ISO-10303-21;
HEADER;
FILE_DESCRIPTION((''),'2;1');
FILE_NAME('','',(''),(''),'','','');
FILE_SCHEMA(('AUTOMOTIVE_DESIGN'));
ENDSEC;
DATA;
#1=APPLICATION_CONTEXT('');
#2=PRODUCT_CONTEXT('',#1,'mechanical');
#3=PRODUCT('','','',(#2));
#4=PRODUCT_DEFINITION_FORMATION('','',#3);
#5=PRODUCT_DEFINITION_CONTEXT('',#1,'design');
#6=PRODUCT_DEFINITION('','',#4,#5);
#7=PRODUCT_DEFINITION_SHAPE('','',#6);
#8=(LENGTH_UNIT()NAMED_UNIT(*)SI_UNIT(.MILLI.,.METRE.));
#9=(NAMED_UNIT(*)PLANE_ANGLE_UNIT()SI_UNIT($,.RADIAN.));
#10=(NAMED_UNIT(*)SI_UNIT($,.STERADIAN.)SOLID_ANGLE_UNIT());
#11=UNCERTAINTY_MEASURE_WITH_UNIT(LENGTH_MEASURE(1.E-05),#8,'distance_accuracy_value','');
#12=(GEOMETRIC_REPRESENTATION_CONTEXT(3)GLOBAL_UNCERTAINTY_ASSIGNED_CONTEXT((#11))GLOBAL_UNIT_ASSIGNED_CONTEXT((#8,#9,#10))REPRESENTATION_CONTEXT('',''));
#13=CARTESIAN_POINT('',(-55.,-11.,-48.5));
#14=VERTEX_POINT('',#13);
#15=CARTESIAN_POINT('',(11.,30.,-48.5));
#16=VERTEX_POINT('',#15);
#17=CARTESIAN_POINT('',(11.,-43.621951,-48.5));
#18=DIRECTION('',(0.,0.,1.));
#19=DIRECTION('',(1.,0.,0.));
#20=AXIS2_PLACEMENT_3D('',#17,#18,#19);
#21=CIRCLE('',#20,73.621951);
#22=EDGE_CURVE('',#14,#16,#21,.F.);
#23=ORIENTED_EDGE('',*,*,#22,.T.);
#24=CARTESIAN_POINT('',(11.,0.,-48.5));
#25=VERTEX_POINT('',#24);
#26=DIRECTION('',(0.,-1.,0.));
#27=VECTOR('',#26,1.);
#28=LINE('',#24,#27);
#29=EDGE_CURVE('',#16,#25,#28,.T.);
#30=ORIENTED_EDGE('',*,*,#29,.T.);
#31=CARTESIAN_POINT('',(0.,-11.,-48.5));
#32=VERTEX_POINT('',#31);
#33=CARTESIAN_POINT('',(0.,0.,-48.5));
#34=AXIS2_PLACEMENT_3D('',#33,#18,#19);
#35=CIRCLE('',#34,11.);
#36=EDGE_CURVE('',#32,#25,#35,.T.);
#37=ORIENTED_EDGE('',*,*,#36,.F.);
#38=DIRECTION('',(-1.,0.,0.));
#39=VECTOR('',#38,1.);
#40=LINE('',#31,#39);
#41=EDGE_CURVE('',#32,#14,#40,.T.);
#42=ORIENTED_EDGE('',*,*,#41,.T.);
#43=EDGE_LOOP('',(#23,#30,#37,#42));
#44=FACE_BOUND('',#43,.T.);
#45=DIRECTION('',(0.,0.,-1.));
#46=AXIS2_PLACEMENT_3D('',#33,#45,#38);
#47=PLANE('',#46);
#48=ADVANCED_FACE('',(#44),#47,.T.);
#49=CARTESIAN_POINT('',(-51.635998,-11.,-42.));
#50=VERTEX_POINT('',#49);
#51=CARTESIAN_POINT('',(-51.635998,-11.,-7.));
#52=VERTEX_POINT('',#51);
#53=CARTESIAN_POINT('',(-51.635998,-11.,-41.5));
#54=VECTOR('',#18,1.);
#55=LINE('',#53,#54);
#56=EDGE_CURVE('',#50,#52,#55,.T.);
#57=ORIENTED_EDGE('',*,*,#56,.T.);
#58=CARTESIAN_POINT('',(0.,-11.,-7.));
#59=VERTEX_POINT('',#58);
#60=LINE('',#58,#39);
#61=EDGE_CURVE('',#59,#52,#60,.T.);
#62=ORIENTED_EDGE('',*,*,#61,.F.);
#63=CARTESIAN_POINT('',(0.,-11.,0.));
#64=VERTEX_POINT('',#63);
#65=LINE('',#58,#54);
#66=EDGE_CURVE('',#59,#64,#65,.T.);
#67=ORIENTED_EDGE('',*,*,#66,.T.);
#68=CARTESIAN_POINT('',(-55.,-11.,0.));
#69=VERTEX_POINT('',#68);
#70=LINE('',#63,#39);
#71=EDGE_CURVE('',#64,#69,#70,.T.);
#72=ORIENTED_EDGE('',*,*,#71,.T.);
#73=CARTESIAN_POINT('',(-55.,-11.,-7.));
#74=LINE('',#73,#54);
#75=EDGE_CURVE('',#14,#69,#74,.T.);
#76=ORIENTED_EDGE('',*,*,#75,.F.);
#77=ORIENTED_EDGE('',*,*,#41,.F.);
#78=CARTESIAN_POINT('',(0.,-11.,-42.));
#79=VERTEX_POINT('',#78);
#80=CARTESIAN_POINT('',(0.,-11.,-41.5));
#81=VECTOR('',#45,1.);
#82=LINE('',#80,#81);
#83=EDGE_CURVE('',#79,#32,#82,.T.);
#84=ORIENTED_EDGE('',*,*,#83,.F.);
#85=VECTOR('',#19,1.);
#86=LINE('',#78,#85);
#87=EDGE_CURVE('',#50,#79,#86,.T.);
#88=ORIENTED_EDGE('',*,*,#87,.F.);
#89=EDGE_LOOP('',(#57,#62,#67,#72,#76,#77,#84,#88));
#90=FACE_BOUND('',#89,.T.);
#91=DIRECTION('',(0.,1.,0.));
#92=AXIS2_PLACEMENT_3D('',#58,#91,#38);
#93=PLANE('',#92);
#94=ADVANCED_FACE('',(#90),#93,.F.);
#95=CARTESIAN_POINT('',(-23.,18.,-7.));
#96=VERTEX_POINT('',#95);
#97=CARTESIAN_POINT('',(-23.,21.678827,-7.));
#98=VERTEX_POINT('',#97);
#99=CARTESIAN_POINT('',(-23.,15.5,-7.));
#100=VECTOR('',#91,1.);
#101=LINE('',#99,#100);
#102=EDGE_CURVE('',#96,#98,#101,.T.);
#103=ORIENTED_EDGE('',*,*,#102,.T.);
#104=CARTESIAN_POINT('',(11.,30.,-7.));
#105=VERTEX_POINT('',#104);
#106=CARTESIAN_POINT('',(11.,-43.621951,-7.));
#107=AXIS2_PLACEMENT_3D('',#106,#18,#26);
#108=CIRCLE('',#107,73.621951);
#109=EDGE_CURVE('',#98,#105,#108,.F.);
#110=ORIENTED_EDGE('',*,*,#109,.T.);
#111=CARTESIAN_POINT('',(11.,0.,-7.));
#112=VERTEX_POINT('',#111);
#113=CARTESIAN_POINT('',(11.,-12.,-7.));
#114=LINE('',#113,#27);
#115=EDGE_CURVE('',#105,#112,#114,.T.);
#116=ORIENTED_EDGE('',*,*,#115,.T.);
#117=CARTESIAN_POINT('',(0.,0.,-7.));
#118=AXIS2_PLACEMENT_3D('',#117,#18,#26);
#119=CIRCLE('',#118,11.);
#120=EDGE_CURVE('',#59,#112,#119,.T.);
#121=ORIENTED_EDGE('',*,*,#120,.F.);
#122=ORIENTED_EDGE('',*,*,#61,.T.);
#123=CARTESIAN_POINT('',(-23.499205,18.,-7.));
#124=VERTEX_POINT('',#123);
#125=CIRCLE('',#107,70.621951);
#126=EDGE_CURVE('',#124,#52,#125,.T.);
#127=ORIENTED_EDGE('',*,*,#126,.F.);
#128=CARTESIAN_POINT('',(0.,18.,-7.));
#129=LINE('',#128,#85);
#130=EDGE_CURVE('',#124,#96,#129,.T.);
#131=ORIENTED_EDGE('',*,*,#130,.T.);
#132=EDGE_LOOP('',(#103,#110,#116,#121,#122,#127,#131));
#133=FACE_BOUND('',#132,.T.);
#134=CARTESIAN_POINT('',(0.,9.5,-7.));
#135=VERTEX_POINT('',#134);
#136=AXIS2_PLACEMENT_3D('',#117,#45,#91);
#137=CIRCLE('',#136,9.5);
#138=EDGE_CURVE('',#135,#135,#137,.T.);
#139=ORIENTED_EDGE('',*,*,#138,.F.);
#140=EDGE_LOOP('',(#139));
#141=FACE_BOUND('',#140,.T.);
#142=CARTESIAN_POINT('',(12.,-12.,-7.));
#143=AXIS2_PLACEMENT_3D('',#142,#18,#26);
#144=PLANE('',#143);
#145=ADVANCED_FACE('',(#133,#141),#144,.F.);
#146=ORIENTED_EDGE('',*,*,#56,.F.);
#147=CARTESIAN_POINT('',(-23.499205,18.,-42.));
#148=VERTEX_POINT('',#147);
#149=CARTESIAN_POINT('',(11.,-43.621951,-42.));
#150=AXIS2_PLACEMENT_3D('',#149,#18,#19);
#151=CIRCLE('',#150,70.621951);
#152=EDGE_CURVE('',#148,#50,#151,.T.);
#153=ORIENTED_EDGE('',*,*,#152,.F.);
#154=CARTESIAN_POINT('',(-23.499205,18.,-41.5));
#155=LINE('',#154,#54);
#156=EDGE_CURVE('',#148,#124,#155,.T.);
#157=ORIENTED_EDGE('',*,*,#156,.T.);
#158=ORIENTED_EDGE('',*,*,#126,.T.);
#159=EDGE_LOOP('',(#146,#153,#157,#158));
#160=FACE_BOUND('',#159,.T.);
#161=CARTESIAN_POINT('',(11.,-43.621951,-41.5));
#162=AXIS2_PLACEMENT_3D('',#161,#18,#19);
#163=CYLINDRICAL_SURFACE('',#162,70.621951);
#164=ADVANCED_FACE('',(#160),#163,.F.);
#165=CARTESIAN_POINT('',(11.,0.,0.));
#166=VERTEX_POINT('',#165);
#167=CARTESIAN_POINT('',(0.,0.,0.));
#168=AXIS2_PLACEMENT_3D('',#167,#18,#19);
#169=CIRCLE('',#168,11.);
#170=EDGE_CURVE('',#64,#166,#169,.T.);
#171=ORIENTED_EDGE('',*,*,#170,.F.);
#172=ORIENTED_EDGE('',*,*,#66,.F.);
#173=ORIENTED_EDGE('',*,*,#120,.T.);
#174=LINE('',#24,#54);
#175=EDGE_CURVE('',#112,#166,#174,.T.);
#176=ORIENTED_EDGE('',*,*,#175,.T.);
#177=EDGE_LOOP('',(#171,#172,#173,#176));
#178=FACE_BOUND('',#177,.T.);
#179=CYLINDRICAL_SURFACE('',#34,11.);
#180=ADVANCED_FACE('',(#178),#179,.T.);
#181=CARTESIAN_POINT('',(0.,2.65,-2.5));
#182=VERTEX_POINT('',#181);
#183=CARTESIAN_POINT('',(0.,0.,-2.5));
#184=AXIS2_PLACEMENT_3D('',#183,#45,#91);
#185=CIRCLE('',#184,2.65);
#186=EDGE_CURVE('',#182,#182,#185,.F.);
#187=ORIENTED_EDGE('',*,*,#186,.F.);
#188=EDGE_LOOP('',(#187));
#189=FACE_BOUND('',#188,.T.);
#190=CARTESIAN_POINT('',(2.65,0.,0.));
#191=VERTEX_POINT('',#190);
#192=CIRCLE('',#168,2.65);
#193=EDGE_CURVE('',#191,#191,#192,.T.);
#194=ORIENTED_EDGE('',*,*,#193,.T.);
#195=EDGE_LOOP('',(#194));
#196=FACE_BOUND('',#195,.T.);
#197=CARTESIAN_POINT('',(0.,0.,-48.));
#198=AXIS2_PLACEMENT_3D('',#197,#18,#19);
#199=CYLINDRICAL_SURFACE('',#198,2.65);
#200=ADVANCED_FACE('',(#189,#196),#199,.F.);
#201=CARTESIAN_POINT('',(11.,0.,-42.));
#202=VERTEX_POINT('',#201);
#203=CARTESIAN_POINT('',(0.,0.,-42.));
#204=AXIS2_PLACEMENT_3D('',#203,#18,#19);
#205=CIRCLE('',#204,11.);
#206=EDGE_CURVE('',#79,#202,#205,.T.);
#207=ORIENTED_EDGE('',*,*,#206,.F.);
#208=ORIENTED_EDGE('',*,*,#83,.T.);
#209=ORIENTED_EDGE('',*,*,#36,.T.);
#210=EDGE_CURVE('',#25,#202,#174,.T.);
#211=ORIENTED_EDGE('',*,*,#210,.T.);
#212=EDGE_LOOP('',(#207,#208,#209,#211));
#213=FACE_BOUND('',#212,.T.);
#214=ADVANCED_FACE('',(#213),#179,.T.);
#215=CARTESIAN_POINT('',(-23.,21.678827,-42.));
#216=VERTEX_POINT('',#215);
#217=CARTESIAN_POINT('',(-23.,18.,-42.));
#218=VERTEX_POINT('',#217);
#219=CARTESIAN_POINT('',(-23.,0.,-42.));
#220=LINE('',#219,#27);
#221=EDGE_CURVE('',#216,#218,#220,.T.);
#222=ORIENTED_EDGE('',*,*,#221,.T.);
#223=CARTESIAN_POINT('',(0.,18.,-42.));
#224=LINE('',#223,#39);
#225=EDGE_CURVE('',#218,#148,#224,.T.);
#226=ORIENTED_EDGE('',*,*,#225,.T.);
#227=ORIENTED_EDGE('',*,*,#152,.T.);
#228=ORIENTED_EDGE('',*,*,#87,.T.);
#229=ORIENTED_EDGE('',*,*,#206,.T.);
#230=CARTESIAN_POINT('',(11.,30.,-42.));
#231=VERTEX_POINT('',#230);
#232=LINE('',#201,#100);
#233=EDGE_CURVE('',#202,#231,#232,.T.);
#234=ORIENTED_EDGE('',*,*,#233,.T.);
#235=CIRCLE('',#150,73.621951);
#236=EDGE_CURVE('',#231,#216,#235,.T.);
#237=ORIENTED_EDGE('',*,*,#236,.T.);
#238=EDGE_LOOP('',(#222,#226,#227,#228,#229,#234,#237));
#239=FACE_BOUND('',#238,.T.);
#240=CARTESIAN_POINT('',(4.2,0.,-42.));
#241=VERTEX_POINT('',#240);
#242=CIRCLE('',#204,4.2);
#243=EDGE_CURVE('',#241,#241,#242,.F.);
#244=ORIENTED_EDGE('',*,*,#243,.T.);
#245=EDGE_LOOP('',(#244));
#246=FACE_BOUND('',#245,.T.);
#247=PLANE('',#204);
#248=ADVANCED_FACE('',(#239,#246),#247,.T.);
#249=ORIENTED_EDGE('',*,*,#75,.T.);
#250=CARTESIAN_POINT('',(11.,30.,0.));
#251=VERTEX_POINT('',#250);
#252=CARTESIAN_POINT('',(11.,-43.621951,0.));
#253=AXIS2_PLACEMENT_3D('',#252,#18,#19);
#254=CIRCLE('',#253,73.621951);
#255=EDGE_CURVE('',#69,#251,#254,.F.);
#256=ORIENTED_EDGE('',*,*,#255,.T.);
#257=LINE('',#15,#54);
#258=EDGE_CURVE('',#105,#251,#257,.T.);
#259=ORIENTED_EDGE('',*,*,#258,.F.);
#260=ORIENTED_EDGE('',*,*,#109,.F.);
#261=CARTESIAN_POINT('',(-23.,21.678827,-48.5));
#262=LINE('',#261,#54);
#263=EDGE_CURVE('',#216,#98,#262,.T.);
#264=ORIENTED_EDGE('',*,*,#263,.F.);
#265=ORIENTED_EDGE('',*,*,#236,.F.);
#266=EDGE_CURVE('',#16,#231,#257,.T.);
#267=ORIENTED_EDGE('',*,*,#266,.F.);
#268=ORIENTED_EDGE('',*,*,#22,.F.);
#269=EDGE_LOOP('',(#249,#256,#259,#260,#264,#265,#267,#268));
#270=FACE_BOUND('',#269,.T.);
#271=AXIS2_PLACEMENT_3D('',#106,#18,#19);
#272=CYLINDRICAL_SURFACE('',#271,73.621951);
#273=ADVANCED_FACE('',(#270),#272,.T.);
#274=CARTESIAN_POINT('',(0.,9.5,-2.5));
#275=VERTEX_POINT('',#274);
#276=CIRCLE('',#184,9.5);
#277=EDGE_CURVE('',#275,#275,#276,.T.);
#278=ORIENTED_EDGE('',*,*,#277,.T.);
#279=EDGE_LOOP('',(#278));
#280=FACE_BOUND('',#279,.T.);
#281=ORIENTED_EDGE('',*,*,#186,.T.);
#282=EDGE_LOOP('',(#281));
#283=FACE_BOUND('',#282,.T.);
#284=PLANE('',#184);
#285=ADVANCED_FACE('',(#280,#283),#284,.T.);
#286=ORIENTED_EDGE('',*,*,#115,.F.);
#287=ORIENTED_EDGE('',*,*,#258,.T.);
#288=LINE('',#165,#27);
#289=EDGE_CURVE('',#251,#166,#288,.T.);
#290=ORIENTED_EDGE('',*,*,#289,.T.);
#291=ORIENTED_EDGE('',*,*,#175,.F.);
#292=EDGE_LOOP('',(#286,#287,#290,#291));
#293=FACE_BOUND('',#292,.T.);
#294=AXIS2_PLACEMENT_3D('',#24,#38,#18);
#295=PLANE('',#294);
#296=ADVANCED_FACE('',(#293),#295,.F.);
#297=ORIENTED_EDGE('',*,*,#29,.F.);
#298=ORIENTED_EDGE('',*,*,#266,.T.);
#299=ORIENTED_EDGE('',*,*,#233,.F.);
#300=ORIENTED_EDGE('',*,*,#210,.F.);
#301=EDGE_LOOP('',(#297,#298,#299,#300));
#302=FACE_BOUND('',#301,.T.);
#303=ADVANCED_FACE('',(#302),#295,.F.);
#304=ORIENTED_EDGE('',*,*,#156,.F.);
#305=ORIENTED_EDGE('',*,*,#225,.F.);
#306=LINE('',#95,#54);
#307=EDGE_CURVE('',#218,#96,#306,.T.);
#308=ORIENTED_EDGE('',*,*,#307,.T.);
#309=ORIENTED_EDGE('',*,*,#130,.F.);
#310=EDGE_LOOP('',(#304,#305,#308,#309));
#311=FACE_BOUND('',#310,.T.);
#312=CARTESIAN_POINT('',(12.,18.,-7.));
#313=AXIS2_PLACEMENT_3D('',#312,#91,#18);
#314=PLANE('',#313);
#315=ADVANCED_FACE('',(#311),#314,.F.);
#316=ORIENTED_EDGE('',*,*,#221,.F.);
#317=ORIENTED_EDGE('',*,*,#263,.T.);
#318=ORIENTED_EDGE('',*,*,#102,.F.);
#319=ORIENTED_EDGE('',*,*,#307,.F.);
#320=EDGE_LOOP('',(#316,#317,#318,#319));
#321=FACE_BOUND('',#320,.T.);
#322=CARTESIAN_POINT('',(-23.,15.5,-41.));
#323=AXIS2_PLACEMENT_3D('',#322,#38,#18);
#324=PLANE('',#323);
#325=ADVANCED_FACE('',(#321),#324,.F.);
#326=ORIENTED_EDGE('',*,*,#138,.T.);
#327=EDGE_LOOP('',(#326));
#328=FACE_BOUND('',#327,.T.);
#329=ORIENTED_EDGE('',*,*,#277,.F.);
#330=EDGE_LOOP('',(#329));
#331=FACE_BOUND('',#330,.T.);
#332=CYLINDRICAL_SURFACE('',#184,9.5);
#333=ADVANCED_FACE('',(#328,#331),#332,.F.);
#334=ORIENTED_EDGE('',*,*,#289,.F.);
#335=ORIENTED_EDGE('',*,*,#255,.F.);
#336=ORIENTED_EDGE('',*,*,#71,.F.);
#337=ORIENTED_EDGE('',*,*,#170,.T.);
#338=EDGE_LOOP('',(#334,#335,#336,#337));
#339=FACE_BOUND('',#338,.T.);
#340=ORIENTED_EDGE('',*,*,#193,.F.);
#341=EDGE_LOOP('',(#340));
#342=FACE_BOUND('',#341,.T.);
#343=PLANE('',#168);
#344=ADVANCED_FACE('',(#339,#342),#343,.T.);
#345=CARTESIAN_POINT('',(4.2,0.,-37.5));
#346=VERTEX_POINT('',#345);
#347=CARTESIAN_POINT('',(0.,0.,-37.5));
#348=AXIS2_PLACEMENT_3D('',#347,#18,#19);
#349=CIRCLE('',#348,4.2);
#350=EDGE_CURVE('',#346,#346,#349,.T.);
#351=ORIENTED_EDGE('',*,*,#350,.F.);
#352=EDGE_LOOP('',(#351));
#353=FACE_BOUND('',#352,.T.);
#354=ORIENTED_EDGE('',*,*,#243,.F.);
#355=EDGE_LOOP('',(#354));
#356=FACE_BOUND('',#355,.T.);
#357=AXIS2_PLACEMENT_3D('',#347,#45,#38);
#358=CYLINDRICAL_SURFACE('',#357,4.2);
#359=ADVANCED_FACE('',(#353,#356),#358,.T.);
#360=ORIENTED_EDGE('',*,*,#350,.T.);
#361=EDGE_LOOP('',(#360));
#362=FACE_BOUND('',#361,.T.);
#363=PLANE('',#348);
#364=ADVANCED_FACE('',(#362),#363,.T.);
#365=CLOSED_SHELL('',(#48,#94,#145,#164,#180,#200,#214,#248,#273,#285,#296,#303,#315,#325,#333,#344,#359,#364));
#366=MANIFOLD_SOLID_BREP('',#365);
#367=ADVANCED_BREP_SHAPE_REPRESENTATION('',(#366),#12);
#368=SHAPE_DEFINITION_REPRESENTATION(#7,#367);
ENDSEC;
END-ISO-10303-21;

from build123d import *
from build123d.topology import SkipClean

# Parameters (mm, degrees)
SKETCH1_R              = 9.5
BOSS_EXTRUDE1_DEPTH    = 48
SKETCH2_W              = 34
SKETCH2_H              = 30
CUT_EXTRUDE1_DEPTH     = 62.481704596
BOSS_EXTRUDE2_START    = -2.5
SKETCH3_R              = 9.5
SKETCH3_R_2            = 2.4
BOSS_EXTRUDE2_DEPTH    = 2.5
SKETCH4_R              = 9.5
SKETCH4_R_2            = 4.2
BOSS_EXTRUDE3_DEPTH    = 7
SKETCH5_R              = 4.2
BOSS_EXTRUDE4_DEPTH    = 11
BOSS_EXTRUDE5_DEPTH    = 48
CUT_EXTRUDE2_START     = -48
CUT_EXTRUDE2_OUTLINE_R = 2.65
CUT_EXTRUDE2_DEPTH     = 48
CUT_EXTRUDE3_START     = -4.5
SKETCH8_R              = 9.5
CUT_EXTRUDE3_DEPTH     = 4.5
SKETCH9_R              = 6.067807638
CUT_EXTRUDE4_DEPTH     = 4.5
SKETCH10_R             = 9.5
BOSS_EXTRUDE6_DEPTH    = 4.5
SKETCH11_R             = 4.2
BOSS_EXTRUDE7_DEPTH    = 3.5
SKETCH12_R             = 2.4
BOSS_EXTRUDE8_DEPTH    = 2.5
SKETCH13_W             = 35
SKETCH13_H             = 34
CUT_EXTRUDE5_DEPTH     = 14.5
SKETCH15_R             = 3.436413098
BOSS_EXTRUDE9_DEPTH    = 10
BOSS_EXTRUDE10_DEPTH   = 0.5
SKETCH18_R             = 4.2
CUT_EXTRUDE8_DEPTH     = 0.5
CUT_EXTRUDE9_DEPTH     = 69.529190861
BOSS_EXTRUDE11_DEPTH   = 7
CUT_EXTRUDE10_DEPTH    = 80.22909819
BOSS_EXTRUDE12_DEPTH   = 41.5
SKETCH25_R             = 4.2
CUT_EXTRUDE11_DEPTH    = 0.5


# Read off the part's stored shape, not the designer's step: Cut-Extrude2
with BuildPart() as part:
    # Sketch1 → Boss-Extrude1 (new body)
    with BuildSketch(Plane.XY):
        with BuildLine():
            Line((-12, 0), (-12, 30))
            Line((-12, 30), (12, 30))
            Line((12, 30), (12, 0))
            ThreePointArc((12, 0), (0, -12), (-12, 0))
        make_face()
        Circle(SKETCH1_R, mode=Mode.SUBTRACT)
    extrude(amount=-BOSS_EXTRUDE1_DEPTH)

    # Sketch2 → Cut-Extrude1 (cut, through all)
    with BuildSketch(Plane.ZY.offset(12)):
        with Locations((-24, 3)):
            Rectangle(SKETCH2_W, SKETCH2_H)
    extrude(amount=-CUT_EXTRUDE1_DEPTH, mode=Mode.SUBTRACT)

    # Sketch3 → Boss-Extrude2 (add)
    with BuildSketch(Plane(origin=(0, 0, -48), x_dir=(-1, 0, 0), z_dir=(0, 0, -1)).offset(BOSS_EXTRUDE2_START)):
        Circle(SKETCH3_R)
        Circle(SKETCH3_R_2, mode=Mode.SUBTRACT)
    extrude(amount=BOSS_EXTRUDE2_DEPTH)

    # Sketch4 → Boss-Extrude3 (add)
    with BuildSketch(Plane.XY):
        with Locations(Location((0, 0, 0), (0, 0, 180))):
            Circle(SKETCH4_R)
        Circle(SKETCH4_R_2, mode=Mode.SUBTRACT)
    extrude(amount=-BOSS_EXTRUDE3_DEPTH)

    # Sketch5 → Boss-Extrude4 (add)
    with BuildSketch(Plane.XY):
        Circle(SKETCH5_R)
    extrude(amount=-BOSS_EXTRUDE4_DEPTH)

    # Sketch6 → Boss-Extrude5 (add)
    with BuildSketch(Plane(origin=(0, 0, -48), x_dir=(-1, 0, 0), z_dir=(0, 0, -1))):
        Polygon((12, 30), (12, 18), (18, 18), (38, 18), (38, 30), align=None)
    extrude(amount=-BOSS_EXTRUDE5_DEPTH)

    # Cut-Extrude2 outline → Cut-Extrude2 (cut)
    with BuildSketch(Plane.XY.offset(CUT_EXTRUDE2_START)):
        Circle(CUT_EXTRUDE2_OUTLINE_R)
    extrude(amount=CUT_EXTRUDE2_DEPTH, mode=Mode.SUBTRACT)

    # Sketch8 → Cut-Extrude3 (cut)
    with BuildSketch(Plane(origin=(0, 0, -7), x_dir=(-1, 0, 0), z_dir=(0, 0, -1)).offset(CUT_EXTRUDE3_START)):
        Circle(SKETCH8_R)
    extrude(amount=CUT_EXTRUDE3_DEPTH, mode=Mode.SUBTRACT)


with BuildPart() as cut_extrude3_piece_1:
    # of the separate pieces the step leaves, piece 1, a body of its own (cut_extrude3_pieces)
    add(part.part.solids().sort_by_distance((-12, 0, 0))[0])

    # Sketch10 → Boss-Extrude6 (add)
    with BuildSketch(Plane.XY.offset(-45.5)):
        with Locations(Location((0, 0, 0), (0, 0, 90))):
            Circle(SKETCH10_R)
    extrude(amount=BOSS_EXTRUDE6_DEPTH)

    # Sketch11 → Boss-Extrude7 (add)
    with BuildSketch(Plane.XY.offset(-41)):
        with Locations(Location((0, 0, 0), (0, 0, 180))):
            Circle(SKETCH11_R)
    extrude(amount=BOSS_EXTRUDE7_DEPTH)

    # Sketch12 → Boss-Extrude8 (add)
    with BuildSketch(Plane(origin=(0, 0, -48), x_dir=(-1, 0, 0), z_dir=(0, 0, -1))):
        Circle(SKETCH12_R)
    extrude(amount=-BOSS_EXTRUDE8_DEPTH)

    # Sketch13 → Cut-Extrude5 (cut)
    with BuildSketch(Plane(origin=(0, 30, 0), x_dir=(1, 0, 0), z_dir=(0, 1, 0))):
        with Locations((-5.5, 24)):
            Rectangle(SKETCH13_W, SKETCH13_H)
    extrude(amount=-CUT_EXTRUDE5_DEPTH, mode=Mode.SUBTRACT)

    # Sketch15 → Boss-Extrude9 (add)
    with BuildSketch(Plane(origin=(0, 0, -48), x_dir=(-1, 0, 0), z_dir=(0, 0, -1))):
        Circle(SKETCH15_R)
    extrude(amount=-BOSS_EXTRUDE9_DEPTH)

    # Sketch16 → Boss-Extrude10 (add)
    with SkipClean():  # the faces are left unmerged after this step: merging them gives an invalid solid
        with BuildSketch(Plane(origin=(0, 0, -48), x_dir=(-1, 0, 0), z_dir=(0, 0, -1))):
            Polygon((38, 30), (-12, 30), (-12, 18), (12, 18), (38, 18), align=None)
            with BuildLine():
                Line((-12, 0), (12, 0))
                ThreePointArc((12, 0), (0, -12), (-12, 0))
            make_face()
            with BuildLine():
                ThreePointArc((12, 0), (0, 12), (-12, 0))
                Line((-12, 0), (12, 0))
            make_face()
            with BuildLine():
                Line((12, 0), (-12, 0))
                ThreePointArc((-12, 0), (0, -12), (12, 0))
            make_face()
            with BuildLine():
                Line((12, 18), (-12, 18))
                Line((-12, 18), (-12, 0))
                ThreePointArc((-12, 0), (0, 12), (12, 0))
                Line((12, 0), (12, 18))
            make_face()
        extrude(amount=BOSS_EXTRUDE10_DEPTH)

    # Sketch18 → Cut-Extrude8 (cut)
    with SkipClean():  # the faces are left unmerged after this step: merging them gives an invalid solid
        with BuildSketch(Plane.XY.offset(-41)):
            with BuildLine():
                Line((12, 30), (-23, 30))
                Line((-23, 30), (-23, 18))
                Line((-23, 18), (-12, 18))
                Line((-12, 18), (-12, 0))
                ThreePointArc((-12, 0), (0, -12), (12, 0))
                Line((12, 0), (12, 30))
            make_face()
            Circle(SKETCH18_R, mode=Mode.SUBTRACT)
        extrude(amount=-CUT_EXTRUDE8_DEPTH, mode=Mode.SUBTRACT)

    # Sketch19 → Cut-Extrude9 (cut, through all)
    with SkipClean():  # the faces are left unmerged after this step: merging them gives an invalid solid
        with BuildSketch(Plane.XY):
            with BuildLine():
                ThreePointArc((11, 0), (0, -11), (-11, 0))
                Line((-11, 0), (-12, 0))
                ThreePointArc((-12, 0), (0, -12), (12, 0))
                Line((12, 0), (12, 30))
                Line((12, 30), (11, 30))
                Line((11, 30), (11, 0))
            make_face()
        extrude(amount=-CUT_EXTRUDE9_DEPTH, mode=Mode.SUBTRACT)

    # Sketch21 → Boss-Extrude11 (add)
    with SkipClean():  # the faces are left unmerged after this step: merging them gives an invalid solid
        with BuildSketch(Plane.XY):
            with BuildLine():
                Line((-55, -11), (0, -11))
                ThreePointArc((0, -11), (-7.778174593, -7.778174593), (-11, 0))
                Line((-11, 0), (-12, 0))
                Line((-12, 0), (-12, 18))
                Line((-12, 18), (-29.285566016, 18))
                ThreePointArc((-29.285566016, 18), (-44.085437149, 5.222560402), (-55, -11))
            make_face()
        boss_extrude11 = extrude(amount=-BOSS_EXTRUDE11_DEPTH)

    # Mirror2: Boss-Extrude11 across plane
    with SkipClean():  # the faces are left unmerged after this step: merging them gives an invalid solid
        add(boss_extrude11.mirror(Plane.XY.offset(-24.25)))

    # Sketch23 → Cut-Extrude10 (cut, through all)
    with SkipClean():  # the faces are left unmerged after this step: merging them gives an invalid solid
        with BuildSketch(Plane.XY):
            with BuildLine():
                Line((11, 30), (-38, 30))
                Line((-38, 30), (-38, 11.325220695))
                ThreePointArc((-38, 11.325220695), (-15.219016868, 25.173069355), (11, 30))
            make_face()
        extrude(amount=-CUT_EXTRUDE10_DEPTH, mode=Mode.SUBTRACT)

    # Sketch24 → Boss-Extrude12 (add)
    with SkipClean():  # the faces are left unmerged after this step: merging them gives an invalid solid
        with BuildSketch(Plane.XY):
            with BuildLine():
                ThreePointArc((-23, 21.6788275), (-41.60205739, 7.887419381), (-55, -11))
                Line((-55, -11), (-51.635998377, -11))
                ThreePointArc((-51.635998377, -11), (-39.486754135, 5.75970176), (-23, 18.276837089))
                Line((-23, 18.276837089), (-23, 21.6788275))
            make_face()
        extrude(amount=-BOSS_EXTRUDE12_DEPTH)

    # Sketch25 → Cut-Extrude11 (cut)
    # profile 1 of 3: a face of its own
    with BuildSketch(Plane.XY.offset(-41.5)):
        with BuildLine():
            ThreePointArc((11, 27), (-6.550595226, 24.784456384), (-23, 18.276837089))
            Line((-23, 18.276837089), (-23, 18))
            Line((-23, 18), (-23.499204657, 18))
            ThreePointArc((-23.499204657, 18), (-39.685914386, 5.555259732), (-51.635998377, -11))
            Line((-51.635998377, -11), (0, -11))
            ThreePointArc((0, -11), (-7.778174593, 7.778174593), (11, 0))
            Line((11, 0), (11, 27))
        make_face()
    # profile 2 of 3: a face of its own
    with BuildSketch(Plane.XY.offset(-41.5)):
        with BuildLine():
            ThreePointArc((0, -11), (7.778174593, -7.778174593), (11, 0))
            ThreePointArc((11, 0), (-7.778174593, 7.778174593), (0, -11))
        make_face()
        Circle(SKETCH25_R, mode=Mode.SUBTRACT)
    # profile 3 of 3: a face of its own
    with BuildSketch(Plane.XY.offset(-41.5)):
        with BuildLine():
            ThreePointArc((11, 30), (-6.501727856, 27.889455027), (-23, 21.6788275))
            Line((-23, 21.6788275), (-23, 18.276837089))
            ThreePointArc((-23, 18.276837089), (-6.550595226, 24.784456384), (11, 27))
            Line((11, 27), (11, 30))
        make_face()
    extrude(amount=-CUT_EXTRUDE11_DEPTH, mode=Mode.SUBTRACT)


with BuildPart() as cut_extrude3_piece_2:
    # of the separate pieces the step leaves, piece 2, a body of its own (cut_extrude3_pieces)
    add(part.part.solids().sort_by_distance((4.2, 0, -7))[0])

    # Sketch9 → Cut-Extrude4 (cut)
    with BuildSketch(Plane(origin=(0, 0, -11), x_dir=(-1, 0, 0), z_dir=(0, 0, -1))):
        Circle(SKETCH9_R)
    extrude(amount=-CUT_EXTRUDE4_DEPTH, mode=Mode.SUBTRACT)


solid = cut_extrude3_piece_1.part
